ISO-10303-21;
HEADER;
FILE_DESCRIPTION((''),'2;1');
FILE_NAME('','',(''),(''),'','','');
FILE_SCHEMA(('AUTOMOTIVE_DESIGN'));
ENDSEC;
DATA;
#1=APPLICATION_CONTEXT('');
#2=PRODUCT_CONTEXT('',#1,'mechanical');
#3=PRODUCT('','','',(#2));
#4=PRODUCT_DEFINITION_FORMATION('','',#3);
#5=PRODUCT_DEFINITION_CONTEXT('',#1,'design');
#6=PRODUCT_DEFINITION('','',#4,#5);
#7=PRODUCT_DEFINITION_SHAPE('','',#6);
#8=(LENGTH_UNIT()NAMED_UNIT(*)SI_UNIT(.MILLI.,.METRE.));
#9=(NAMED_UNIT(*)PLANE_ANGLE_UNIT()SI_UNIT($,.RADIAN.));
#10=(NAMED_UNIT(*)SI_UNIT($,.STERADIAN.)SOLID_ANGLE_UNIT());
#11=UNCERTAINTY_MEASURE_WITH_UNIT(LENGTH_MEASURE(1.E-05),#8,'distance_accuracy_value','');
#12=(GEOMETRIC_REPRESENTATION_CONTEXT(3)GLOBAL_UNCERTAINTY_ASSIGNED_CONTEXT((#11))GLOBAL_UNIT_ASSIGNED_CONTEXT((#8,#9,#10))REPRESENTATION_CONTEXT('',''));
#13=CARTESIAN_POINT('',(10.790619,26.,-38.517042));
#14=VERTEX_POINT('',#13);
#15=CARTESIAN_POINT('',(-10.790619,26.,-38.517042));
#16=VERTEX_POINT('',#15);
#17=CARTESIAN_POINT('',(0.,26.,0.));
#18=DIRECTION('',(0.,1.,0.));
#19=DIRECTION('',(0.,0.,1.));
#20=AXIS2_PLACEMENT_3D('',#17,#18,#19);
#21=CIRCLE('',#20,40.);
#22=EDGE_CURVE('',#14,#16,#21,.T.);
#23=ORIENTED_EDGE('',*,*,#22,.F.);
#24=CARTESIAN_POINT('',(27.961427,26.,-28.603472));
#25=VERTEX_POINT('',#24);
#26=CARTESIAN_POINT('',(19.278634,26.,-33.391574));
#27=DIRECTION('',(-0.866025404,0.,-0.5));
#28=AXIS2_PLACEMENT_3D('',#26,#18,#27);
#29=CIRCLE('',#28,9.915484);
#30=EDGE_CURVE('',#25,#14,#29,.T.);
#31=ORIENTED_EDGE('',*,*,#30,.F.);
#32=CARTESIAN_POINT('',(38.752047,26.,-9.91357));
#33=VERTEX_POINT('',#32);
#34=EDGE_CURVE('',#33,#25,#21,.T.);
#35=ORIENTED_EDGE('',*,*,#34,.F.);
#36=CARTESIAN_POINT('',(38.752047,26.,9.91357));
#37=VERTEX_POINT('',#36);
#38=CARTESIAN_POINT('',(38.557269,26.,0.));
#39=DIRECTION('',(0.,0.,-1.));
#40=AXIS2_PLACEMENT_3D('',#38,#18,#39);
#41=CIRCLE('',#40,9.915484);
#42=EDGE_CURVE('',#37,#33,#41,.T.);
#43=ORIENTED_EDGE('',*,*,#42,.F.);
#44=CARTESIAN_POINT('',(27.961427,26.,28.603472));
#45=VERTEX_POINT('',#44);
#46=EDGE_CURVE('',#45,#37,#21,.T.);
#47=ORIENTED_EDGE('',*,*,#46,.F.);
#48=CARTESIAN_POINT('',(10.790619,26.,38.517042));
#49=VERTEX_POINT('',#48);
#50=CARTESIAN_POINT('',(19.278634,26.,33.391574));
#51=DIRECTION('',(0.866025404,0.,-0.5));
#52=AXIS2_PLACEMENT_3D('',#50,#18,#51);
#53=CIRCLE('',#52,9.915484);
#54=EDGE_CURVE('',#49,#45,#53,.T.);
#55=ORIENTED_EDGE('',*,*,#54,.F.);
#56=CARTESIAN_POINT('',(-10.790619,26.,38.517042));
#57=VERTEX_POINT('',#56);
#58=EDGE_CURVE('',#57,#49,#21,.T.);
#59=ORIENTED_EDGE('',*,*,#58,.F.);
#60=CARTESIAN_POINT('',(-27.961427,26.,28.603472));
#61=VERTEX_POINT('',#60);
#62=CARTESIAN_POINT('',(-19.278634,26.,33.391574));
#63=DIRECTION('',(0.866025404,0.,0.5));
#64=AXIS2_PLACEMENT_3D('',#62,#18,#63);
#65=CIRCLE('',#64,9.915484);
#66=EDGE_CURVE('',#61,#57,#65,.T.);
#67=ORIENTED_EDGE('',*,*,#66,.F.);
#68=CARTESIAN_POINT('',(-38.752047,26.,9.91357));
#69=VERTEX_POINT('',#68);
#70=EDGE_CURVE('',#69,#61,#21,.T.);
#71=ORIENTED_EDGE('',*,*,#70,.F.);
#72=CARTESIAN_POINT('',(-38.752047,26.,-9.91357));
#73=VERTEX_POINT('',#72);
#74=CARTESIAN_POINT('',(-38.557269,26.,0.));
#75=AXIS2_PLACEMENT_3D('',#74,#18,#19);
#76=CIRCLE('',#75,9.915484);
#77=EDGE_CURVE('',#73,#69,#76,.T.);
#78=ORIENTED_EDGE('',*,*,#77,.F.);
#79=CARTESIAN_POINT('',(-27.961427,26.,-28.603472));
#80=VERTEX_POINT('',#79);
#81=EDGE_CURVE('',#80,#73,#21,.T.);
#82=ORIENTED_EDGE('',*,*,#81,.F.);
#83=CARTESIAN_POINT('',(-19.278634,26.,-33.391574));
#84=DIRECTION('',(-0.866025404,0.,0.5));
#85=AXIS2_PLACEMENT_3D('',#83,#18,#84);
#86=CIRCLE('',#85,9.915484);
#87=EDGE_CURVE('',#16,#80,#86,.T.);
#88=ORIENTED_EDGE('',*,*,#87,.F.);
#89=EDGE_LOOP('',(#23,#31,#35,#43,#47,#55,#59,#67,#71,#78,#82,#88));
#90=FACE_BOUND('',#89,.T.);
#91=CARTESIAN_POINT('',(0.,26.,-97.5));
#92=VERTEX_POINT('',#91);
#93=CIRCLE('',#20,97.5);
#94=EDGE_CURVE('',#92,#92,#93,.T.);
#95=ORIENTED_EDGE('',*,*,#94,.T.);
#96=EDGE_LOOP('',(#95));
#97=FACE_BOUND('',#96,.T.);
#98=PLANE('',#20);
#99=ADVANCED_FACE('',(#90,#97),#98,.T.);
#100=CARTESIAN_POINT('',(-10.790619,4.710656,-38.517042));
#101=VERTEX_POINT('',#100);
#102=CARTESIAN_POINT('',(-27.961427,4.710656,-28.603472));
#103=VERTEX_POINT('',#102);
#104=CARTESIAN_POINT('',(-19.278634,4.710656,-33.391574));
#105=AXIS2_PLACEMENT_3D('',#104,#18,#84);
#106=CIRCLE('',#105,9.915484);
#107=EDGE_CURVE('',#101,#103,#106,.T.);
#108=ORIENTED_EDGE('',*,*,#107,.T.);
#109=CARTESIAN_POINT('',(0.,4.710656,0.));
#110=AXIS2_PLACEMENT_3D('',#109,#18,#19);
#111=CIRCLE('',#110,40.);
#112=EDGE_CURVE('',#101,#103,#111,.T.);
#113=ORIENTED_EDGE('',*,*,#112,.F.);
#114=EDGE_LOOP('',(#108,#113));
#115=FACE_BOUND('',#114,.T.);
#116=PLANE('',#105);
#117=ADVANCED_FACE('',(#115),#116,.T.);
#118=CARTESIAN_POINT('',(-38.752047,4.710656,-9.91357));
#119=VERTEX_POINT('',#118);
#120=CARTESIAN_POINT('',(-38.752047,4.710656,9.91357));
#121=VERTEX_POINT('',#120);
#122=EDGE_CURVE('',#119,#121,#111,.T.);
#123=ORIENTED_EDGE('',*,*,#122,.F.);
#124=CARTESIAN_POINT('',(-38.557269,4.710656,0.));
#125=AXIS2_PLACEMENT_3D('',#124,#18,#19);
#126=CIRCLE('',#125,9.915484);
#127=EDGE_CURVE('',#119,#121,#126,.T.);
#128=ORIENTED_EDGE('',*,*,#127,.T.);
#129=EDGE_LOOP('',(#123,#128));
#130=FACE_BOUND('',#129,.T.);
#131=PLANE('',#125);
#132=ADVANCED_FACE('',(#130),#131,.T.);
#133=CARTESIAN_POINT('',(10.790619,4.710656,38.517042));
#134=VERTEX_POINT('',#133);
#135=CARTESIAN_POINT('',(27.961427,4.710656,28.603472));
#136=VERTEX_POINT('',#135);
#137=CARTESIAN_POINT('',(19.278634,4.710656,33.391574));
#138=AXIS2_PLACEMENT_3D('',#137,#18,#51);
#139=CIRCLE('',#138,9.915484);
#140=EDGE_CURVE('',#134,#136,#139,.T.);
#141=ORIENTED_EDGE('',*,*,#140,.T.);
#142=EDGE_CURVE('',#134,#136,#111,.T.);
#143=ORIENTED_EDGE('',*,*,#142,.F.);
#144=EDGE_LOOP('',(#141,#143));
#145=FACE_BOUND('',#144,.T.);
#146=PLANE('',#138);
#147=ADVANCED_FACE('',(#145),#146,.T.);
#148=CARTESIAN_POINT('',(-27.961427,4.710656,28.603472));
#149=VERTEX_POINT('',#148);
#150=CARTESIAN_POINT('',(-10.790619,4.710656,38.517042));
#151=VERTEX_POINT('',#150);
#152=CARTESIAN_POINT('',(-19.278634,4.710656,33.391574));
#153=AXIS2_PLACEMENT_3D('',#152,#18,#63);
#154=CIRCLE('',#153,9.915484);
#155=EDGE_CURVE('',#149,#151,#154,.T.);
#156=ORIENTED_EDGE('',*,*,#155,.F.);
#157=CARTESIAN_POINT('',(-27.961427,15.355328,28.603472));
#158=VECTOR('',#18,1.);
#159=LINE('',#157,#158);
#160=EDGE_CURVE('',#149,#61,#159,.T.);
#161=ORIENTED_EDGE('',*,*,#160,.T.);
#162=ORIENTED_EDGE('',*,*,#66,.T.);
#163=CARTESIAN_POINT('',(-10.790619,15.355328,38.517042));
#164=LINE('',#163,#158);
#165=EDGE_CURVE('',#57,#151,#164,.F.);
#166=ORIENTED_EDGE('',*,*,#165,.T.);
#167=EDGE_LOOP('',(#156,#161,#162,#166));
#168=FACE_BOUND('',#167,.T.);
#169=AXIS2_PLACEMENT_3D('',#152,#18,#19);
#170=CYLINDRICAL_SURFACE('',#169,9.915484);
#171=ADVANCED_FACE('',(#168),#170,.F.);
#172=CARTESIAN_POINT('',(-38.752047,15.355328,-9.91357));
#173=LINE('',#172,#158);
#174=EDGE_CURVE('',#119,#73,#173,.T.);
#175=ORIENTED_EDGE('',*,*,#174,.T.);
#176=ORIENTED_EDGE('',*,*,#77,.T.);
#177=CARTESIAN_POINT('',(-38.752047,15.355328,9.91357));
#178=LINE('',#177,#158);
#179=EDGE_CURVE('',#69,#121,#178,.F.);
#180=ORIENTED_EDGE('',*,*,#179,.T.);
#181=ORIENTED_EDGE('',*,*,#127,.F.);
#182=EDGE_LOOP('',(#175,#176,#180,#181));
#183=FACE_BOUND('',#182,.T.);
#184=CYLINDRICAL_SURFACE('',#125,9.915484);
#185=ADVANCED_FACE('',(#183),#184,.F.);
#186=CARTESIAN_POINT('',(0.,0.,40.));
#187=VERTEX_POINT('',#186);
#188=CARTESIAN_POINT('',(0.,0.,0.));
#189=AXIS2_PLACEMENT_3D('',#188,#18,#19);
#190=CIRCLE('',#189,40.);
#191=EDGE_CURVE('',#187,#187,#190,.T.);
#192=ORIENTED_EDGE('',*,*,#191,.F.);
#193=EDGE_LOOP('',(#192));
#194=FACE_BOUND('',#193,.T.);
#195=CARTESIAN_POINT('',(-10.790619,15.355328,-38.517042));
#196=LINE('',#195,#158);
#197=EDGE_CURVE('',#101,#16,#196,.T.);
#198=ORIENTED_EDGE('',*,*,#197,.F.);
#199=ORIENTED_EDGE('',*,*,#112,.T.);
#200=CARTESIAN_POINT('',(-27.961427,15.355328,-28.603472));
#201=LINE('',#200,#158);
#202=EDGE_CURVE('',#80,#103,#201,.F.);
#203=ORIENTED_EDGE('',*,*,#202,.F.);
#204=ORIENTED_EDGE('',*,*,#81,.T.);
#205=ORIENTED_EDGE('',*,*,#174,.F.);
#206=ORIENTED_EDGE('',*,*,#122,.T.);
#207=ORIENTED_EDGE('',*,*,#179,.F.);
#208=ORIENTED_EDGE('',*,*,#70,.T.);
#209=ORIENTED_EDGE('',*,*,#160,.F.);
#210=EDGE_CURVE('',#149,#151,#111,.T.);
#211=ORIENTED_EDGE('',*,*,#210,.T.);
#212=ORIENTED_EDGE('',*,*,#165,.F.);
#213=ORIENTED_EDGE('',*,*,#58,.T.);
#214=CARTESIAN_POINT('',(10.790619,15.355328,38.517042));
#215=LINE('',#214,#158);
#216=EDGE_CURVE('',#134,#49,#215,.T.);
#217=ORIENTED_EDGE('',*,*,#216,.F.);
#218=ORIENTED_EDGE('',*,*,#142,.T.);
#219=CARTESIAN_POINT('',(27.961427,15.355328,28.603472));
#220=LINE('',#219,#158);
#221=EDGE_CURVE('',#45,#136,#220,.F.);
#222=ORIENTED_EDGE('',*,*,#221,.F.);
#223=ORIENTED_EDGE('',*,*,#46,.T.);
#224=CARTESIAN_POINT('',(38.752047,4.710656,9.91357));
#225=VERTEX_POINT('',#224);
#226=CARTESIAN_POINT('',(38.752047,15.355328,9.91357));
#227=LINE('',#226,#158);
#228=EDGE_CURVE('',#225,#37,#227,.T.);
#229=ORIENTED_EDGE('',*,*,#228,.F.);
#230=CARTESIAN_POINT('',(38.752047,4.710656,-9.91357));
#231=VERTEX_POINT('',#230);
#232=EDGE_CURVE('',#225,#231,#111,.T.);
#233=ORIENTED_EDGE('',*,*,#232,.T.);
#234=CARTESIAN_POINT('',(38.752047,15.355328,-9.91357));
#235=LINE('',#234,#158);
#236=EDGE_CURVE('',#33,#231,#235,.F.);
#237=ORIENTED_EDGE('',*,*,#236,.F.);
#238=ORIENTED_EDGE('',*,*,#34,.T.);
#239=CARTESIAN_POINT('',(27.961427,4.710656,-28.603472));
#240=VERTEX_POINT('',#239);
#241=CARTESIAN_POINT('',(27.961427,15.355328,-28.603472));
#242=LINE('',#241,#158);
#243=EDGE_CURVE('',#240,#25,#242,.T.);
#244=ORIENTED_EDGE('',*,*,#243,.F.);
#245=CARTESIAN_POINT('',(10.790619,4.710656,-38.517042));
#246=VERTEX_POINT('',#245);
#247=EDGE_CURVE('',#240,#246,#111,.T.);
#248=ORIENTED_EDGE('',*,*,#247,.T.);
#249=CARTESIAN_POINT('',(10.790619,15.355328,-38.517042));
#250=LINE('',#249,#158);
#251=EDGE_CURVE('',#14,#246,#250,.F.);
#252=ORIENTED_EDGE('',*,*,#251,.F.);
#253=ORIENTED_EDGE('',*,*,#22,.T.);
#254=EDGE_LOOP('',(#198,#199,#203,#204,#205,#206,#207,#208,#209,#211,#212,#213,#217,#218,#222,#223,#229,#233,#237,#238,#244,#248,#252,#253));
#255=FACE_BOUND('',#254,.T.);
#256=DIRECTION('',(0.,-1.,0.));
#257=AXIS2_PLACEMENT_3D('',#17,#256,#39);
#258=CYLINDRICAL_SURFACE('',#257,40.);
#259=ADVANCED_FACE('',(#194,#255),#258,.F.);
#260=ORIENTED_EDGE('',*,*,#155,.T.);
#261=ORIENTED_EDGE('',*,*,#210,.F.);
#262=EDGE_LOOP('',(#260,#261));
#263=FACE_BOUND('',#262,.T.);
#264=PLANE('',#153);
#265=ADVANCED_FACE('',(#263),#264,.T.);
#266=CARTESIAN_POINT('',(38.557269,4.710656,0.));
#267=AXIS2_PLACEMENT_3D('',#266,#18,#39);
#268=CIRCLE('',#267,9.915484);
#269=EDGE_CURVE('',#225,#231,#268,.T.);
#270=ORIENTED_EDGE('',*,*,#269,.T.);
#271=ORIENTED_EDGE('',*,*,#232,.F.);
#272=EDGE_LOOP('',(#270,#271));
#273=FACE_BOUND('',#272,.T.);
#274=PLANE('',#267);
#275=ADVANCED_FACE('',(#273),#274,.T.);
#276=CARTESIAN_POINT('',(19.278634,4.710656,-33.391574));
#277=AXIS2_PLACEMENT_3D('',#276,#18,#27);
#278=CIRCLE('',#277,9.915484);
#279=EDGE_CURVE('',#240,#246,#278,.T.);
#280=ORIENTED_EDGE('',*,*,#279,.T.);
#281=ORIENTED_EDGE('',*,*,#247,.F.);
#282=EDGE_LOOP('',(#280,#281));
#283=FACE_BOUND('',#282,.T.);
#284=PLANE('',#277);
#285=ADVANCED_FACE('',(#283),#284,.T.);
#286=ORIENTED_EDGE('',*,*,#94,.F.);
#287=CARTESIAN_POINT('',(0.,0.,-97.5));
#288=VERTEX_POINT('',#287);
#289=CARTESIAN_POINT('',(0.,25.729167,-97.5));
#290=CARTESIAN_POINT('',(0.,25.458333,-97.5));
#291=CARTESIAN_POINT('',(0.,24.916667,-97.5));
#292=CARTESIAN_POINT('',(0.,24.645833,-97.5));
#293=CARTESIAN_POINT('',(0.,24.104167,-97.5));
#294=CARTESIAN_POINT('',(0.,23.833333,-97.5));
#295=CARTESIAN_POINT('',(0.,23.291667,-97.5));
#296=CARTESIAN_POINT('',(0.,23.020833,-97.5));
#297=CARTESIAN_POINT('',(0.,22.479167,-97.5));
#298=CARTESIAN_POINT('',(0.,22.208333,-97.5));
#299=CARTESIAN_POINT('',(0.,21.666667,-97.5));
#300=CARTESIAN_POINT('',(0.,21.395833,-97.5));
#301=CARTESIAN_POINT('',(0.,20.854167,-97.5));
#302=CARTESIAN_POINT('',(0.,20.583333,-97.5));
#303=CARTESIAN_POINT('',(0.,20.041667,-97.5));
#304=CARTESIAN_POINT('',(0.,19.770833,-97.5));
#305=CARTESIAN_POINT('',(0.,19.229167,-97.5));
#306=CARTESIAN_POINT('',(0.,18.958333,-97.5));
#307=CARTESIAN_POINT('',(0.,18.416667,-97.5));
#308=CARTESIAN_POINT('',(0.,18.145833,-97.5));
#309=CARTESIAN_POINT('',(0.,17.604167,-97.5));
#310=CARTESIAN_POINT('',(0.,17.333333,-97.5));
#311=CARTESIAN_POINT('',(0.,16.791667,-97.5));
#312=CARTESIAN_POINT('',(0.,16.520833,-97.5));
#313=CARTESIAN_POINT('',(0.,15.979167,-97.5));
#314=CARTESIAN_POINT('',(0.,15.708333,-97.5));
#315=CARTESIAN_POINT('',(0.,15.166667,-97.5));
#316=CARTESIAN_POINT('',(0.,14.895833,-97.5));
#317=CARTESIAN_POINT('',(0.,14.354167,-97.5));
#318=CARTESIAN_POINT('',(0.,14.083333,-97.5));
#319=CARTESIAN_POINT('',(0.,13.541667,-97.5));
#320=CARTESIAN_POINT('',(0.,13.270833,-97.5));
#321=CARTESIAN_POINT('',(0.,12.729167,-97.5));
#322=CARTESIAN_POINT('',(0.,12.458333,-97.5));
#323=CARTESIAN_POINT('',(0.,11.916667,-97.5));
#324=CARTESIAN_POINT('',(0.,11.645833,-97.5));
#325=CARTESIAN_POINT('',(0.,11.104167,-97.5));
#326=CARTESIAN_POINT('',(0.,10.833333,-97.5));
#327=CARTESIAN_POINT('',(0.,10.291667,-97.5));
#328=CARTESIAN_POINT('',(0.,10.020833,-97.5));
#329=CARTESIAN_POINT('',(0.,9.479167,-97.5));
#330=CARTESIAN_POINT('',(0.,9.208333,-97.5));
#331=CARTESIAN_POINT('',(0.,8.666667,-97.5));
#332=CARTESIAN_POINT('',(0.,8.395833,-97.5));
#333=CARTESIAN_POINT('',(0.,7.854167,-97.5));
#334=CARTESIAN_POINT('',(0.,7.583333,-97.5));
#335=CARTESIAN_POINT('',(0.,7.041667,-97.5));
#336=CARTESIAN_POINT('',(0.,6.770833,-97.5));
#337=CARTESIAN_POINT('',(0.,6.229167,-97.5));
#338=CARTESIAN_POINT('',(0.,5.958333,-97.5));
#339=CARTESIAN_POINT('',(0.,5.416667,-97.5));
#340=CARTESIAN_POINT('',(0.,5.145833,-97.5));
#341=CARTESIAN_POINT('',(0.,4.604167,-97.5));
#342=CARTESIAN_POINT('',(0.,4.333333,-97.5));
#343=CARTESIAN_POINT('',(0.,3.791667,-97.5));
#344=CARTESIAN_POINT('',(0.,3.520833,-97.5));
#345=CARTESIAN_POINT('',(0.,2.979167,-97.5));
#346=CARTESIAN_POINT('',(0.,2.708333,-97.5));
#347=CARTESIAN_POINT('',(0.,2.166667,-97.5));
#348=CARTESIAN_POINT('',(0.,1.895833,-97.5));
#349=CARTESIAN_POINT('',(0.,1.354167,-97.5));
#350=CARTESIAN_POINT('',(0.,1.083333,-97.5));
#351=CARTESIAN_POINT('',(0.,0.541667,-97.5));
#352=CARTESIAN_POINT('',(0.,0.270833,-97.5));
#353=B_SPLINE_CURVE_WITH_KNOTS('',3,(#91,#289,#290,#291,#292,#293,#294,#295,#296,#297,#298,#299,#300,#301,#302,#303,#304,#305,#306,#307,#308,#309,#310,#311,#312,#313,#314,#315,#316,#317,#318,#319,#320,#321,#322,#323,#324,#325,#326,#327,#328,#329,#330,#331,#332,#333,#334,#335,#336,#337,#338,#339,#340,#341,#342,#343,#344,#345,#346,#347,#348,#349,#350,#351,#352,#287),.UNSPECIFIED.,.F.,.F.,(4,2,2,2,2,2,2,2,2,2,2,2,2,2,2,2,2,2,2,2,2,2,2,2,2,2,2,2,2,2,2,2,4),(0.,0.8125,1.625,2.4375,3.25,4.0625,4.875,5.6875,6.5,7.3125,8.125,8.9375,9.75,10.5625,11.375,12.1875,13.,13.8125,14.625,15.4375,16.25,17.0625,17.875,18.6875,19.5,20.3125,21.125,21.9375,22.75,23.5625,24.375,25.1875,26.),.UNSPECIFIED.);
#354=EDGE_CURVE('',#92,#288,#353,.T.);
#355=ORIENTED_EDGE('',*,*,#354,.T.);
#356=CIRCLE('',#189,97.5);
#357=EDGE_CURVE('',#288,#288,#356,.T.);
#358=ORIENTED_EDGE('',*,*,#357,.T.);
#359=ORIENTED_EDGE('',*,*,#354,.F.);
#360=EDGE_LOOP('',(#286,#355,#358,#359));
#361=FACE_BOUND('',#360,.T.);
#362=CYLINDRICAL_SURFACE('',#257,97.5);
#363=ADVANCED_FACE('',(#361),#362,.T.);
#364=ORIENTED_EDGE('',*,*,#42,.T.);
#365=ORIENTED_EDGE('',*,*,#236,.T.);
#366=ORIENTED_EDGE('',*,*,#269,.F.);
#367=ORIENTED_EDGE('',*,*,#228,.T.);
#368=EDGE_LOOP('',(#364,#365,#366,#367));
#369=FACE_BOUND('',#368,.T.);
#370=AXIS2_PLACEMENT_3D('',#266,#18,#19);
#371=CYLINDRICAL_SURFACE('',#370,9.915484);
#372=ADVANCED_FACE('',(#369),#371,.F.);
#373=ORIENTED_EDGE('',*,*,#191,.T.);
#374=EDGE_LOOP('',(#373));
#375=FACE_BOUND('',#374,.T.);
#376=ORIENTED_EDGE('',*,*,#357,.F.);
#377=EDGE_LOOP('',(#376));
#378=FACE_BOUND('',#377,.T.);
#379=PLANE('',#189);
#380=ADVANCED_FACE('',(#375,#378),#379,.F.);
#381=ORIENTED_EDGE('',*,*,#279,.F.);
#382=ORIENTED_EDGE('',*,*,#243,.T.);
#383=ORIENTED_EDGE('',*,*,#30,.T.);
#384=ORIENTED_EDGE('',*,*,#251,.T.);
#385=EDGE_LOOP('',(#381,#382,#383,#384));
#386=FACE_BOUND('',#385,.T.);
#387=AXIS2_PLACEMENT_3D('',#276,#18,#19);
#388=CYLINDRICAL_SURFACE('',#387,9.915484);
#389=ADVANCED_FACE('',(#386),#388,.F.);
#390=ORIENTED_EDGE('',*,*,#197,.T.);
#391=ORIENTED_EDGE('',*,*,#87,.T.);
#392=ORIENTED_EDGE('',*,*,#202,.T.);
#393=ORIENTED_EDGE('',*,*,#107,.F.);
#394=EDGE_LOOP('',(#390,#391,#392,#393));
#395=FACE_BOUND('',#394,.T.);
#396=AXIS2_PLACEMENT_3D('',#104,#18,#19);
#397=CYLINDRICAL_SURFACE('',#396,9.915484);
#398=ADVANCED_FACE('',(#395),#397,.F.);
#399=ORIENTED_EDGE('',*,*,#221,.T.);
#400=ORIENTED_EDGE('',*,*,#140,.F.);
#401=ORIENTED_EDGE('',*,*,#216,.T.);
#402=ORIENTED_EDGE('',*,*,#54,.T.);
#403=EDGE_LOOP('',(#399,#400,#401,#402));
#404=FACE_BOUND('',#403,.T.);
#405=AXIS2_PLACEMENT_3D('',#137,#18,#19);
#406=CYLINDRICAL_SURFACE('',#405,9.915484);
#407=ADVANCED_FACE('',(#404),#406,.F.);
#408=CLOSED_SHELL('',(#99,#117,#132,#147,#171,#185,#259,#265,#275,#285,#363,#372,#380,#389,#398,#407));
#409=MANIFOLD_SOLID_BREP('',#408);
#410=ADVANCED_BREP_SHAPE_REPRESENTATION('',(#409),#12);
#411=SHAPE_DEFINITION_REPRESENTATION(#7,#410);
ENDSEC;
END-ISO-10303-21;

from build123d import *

# Parameters (mm, degrees)
SKETCH1_R           = 97.5
BOSS_EXTRUDE1_DEPTH = 26
SKETCH2_R           = 40
CUT_EXTRUDE1_DEPTH  = 141.315715442
SKETCH3_R           = 9.915483769
CUT_EXTRUDE2_DEPTH  = 21.289343775
CIRPATTERN1_COUNT   = 6


with BuildPart() as part:
    # Sketch1 → Boss-Extrude1 (new body)
    with BuildSketch(Plane(origin=(0, 0, 0), x_dir=(1, 0, 0), z_dir=(0, 1, 0))):
        Circle(SKETCH1_R)
    extrude(amount=BOSS_EXTRUDE1_DEPTH)

    # Sketch2 → Cut-Extrude1 (cut, through all)
    with BuildSketch(Plane(origin=(0, 0, 0), x_dir=(1, 0, 0), z_dir=(0, 1, 0))):
        Circle(SKETCH2_R)
    extrude(amount=CUT_EXTRUDE1_DEPTH, mode=Mode.SUBTRACT)

    # Sketch3 → Cut-Extrude2 (cut)
    with BuildSketch(Plane(origin=(0, 26, 0), x_dir=(1, 0, 0), z_dir=(0, 1, 0))):
        with Locations((-38.557268576, 0)):
            Circle(SKETCH3_R)
    cut_extrude2 = extrude(amount=-CUT_EXTRUDE2_DEPTH, mode=Mode.SUBTRACT)

    # CirPattern1: Cut-Extrude2 ×6 about axis
    cirpattern1_axis = Axis((0, 0, 0), (0, 1, 0))
    for i in range(1, CIRPATTERN1_COUNT):
        add(cut_extrude2.rotate(cirpattern1_axis, i * 360 / CIRPATTERN1_COUNT), mode=Mode.SUBTRACT)


solid = part.part
